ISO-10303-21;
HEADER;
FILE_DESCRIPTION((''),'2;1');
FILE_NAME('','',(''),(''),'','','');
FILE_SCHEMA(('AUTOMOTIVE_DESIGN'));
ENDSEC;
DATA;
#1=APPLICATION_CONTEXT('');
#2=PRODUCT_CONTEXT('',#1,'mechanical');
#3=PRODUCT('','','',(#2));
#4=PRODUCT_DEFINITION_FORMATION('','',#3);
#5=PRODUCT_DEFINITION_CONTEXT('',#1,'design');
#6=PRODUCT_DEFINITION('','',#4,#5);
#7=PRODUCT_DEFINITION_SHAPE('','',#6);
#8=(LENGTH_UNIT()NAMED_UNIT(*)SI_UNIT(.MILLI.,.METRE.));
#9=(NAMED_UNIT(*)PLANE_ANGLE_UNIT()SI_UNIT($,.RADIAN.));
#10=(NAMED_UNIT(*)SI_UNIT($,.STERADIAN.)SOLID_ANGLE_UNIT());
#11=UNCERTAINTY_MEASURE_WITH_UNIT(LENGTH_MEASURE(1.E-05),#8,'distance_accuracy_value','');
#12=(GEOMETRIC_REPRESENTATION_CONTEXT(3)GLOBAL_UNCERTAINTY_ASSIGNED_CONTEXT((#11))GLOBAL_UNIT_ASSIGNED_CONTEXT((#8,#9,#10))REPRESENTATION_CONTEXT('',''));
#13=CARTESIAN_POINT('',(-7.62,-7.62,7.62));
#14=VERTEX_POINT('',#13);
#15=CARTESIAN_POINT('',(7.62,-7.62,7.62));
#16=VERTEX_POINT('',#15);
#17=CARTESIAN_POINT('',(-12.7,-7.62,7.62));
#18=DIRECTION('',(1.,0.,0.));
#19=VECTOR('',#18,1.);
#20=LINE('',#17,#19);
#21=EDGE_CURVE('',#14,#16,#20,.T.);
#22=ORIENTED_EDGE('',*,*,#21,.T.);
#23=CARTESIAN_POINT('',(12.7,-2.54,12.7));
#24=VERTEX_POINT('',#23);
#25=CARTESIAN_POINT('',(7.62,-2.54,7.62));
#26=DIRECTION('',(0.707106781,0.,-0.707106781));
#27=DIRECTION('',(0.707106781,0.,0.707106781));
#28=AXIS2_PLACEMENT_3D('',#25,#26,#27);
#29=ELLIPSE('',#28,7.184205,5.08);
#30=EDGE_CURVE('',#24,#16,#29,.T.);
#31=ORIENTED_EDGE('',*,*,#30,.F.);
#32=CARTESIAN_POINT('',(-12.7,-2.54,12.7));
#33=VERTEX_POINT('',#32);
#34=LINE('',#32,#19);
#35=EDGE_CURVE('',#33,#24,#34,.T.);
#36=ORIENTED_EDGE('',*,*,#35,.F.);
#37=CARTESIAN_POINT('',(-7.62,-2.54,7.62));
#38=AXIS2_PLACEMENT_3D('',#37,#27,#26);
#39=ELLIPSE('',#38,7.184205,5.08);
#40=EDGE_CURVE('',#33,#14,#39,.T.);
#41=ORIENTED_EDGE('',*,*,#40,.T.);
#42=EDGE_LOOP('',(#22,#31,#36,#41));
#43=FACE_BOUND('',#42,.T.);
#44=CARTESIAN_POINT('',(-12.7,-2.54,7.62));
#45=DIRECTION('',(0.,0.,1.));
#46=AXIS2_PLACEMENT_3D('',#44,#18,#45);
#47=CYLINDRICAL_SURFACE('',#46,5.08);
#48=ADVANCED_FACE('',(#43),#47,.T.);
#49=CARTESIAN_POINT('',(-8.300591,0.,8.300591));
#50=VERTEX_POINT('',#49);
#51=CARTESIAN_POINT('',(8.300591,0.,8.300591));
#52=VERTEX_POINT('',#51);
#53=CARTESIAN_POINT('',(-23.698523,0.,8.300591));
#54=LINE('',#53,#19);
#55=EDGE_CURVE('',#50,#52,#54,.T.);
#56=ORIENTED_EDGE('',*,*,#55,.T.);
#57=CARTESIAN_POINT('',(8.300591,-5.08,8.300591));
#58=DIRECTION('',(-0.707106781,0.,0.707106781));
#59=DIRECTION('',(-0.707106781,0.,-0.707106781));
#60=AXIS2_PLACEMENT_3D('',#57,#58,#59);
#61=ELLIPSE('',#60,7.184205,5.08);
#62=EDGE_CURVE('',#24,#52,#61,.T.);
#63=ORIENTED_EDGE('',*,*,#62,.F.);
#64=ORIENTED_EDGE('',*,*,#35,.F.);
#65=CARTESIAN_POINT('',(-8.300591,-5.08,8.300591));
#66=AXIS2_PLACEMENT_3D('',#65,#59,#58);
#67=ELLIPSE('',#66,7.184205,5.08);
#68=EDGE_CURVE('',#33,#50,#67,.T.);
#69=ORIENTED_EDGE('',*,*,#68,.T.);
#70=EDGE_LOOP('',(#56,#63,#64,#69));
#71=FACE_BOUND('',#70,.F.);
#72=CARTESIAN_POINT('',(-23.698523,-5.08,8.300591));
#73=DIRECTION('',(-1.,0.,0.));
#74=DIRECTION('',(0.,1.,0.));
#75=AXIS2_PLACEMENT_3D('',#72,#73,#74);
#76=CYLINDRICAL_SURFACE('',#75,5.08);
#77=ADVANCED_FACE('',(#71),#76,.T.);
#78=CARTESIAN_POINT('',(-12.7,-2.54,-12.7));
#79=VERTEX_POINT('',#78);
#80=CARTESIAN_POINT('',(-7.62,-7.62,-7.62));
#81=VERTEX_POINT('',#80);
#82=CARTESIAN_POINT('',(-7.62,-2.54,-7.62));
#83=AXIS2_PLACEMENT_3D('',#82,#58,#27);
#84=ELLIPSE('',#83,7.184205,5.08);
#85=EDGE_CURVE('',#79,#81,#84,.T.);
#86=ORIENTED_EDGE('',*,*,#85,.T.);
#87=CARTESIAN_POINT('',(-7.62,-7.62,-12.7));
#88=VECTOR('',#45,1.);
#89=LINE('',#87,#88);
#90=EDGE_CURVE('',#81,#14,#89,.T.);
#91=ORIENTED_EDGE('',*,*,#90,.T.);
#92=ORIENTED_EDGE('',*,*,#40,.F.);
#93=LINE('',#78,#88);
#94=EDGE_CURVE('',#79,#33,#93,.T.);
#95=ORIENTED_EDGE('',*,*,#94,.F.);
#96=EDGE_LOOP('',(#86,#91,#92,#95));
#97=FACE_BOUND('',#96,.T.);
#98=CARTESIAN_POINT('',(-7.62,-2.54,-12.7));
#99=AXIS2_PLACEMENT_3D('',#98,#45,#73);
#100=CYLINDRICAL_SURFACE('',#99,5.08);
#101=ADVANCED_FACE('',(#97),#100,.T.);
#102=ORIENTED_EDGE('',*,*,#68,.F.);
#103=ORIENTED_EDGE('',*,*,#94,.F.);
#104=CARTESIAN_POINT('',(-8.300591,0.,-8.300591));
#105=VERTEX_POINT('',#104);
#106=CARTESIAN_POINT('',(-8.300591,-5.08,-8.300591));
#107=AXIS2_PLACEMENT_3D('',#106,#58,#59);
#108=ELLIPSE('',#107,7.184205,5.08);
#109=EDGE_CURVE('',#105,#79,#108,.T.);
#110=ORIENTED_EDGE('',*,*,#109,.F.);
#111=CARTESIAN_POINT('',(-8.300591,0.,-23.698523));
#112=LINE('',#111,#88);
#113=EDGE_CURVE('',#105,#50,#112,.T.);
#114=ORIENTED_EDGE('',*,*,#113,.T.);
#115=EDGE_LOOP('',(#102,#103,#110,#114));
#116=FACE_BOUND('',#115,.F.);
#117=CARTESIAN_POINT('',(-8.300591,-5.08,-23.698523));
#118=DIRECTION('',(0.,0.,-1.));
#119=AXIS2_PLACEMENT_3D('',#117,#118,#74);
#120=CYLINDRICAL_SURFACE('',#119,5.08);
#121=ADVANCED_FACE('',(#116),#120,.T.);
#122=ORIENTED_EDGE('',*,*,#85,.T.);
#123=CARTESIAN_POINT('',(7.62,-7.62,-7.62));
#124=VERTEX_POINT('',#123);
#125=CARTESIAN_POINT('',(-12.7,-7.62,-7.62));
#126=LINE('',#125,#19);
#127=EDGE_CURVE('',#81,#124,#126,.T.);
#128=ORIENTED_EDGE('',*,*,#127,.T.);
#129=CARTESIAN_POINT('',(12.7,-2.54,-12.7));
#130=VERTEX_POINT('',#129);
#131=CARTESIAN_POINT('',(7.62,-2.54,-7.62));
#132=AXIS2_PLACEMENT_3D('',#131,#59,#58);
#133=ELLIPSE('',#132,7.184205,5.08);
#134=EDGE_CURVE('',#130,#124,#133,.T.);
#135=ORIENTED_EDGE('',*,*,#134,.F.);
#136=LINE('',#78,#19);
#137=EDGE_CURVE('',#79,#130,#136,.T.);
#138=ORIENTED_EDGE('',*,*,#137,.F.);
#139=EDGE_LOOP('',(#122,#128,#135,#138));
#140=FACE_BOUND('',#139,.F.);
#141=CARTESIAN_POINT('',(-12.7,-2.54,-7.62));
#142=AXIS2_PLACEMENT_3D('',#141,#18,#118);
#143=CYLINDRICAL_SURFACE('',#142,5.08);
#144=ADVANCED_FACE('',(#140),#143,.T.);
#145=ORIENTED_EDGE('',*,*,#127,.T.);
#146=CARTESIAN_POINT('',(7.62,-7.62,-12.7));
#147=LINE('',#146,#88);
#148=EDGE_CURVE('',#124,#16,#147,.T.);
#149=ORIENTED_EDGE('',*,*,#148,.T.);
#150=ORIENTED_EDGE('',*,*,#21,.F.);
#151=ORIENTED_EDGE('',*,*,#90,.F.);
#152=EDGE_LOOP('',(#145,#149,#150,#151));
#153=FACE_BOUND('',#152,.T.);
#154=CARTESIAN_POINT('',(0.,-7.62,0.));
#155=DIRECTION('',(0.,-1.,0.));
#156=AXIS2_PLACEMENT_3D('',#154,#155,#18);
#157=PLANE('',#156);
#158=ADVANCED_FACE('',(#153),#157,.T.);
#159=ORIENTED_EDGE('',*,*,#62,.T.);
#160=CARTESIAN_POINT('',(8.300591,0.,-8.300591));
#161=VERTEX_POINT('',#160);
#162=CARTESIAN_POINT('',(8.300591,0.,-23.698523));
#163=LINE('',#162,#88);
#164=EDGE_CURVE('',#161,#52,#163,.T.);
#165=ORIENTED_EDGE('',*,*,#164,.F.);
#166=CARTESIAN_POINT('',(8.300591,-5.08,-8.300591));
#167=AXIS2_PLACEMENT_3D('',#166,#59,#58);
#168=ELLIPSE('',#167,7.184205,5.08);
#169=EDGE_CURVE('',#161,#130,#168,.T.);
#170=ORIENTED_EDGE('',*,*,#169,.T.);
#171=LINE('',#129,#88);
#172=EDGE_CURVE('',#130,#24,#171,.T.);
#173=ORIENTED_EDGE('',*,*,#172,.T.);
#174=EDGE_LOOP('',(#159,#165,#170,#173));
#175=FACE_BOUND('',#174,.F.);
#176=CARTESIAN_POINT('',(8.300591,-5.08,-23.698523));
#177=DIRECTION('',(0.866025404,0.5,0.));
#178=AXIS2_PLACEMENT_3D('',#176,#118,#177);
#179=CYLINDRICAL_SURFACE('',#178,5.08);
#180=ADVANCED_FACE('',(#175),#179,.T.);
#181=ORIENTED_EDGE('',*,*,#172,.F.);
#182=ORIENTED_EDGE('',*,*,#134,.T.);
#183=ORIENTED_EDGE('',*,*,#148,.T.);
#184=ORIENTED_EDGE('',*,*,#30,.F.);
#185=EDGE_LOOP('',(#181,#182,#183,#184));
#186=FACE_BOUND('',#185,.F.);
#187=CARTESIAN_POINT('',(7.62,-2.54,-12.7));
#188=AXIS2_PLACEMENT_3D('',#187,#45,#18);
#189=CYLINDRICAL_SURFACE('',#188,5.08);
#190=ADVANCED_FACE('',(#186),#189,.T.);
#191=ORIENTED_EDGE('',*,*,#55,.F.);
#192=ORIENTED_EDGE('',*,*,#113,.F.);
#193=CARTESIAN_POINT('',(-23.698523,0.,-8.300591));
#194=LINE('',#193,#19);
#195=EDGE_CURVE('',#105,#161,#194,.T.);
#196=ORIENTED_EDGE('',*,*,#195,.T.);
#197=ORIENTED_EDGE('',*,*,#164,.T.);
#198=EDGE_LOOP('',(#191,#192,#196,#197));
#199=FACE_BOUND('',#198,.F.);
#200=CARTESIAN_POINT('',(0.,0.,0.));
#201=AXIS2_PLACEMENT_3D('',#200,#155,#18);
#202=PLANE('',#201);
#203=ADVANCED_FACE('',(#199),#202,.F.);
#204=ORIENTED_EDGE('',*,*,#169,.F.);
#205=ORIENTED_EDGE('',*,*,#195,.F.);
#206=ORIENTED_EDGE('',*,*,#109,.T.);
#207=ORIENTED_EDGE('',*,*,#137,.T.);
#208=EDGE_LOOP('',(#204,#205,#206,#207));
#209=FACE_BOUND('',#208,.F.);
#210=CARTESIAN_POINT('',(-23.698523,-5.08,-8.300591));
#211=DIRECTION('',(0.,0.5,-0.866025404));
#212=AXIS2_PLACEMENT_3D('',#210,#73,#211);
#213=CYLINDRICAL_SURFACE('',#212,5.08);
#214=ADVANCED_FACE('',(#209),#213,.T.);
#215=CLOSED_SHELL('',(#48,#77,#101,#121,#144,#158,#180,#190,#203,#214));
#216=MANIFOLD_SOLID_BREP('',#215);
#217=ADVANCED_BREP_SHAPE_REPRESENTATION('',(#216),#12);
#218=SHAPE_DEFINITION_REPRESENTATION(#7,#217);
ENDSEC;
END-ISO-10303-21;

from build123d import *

# Parameters (mm, degrees)
F0_W        = 25.4
F0_H        = 25.4
F1_DEPTH    = 7.62
F2_R        = 5.08
F3_T1_DEPTH = 47.3970452561
F3_T3_DEPTH = 47.3970452561


# Not quite as in the source:
# - a fillet or chamfer that OpenCascade refuses, or shapes differently, is made with other operations: its cross-section is extruded or revolved along the edge and cut away or added


with BuildPart() as f1:
    # F0 (on Front) → F1 (new body)
    with BuildSketch(Plane.XZ):
        Rectangle(F0_W, F0_H)
    extrude(amount=F1_DEPTH)

    # F2
    f2_edges = [f1.edges().sort_by_distance(p)[0] for p in [
        (0, -7.62, 12.7),
        (-12.7, -7.62, 0),
        (12.7, -7.62, 0),
        (0, -7.62, -12.7),
    ]]
    fillet(f2_edges, radius=F2_R)

    # F3: fillet of radius 5.08 on 4 edges, made by hand

    # F3_s2 → F3_t1 (cut)
    with BuildSketch(Plane.YZ.offset(-23.6985226281)):
        with BuildLine():
            ThreePointArc((-2.54, -12.7), (-0.6805909488, -10.8405909488), (0, -8.3005909488))
            Line((0, -8.3005909488), (0, -12.7))
            Line((0, -12.7), (-2.54, -12.7))
        make_face()
        with BuildLine():
            ThreePointArc((0, 8.3005909488), (-0.6805909488, 10.8405909488), (-2.54, 12.7))
            Line((-2.54, 12.7), (0, 12.7))
            Line((0, 12.7), (0, 8.3005909488))
        make_face()
    extrude(amount=F3_T1_DEPTH, mode=Mode.SUBTRACT)

    # F3_s4 → F3_t3 (cut)
    with BuildSketch(Plane.XY.offset(-23.6985226281)):
        with BuildLine():
            ThreePointArc((-8.3005909488, 0), (-10.8405909488, -0.6805909488), (-12.7, -2.54))
            Line((-12.7, -2.54), (-12.7, 0))
            Line((-12.7, 0), (-8.3005909488, 0))
        make_face()
        with BuildLine():
            ThreePointArc((12.7, -2.54), (10.8405909488, -0.6805909488), (8.3005909488, 0))
            Line((8.3005909488, 0), (12.7, 0))
            Line((12.7, 0), (12.7, -2.54))
        make_face()
    extrude(amount=F3_T3_DEPTH, mode=Mode.SUBTRACT)


solid = f1.part
